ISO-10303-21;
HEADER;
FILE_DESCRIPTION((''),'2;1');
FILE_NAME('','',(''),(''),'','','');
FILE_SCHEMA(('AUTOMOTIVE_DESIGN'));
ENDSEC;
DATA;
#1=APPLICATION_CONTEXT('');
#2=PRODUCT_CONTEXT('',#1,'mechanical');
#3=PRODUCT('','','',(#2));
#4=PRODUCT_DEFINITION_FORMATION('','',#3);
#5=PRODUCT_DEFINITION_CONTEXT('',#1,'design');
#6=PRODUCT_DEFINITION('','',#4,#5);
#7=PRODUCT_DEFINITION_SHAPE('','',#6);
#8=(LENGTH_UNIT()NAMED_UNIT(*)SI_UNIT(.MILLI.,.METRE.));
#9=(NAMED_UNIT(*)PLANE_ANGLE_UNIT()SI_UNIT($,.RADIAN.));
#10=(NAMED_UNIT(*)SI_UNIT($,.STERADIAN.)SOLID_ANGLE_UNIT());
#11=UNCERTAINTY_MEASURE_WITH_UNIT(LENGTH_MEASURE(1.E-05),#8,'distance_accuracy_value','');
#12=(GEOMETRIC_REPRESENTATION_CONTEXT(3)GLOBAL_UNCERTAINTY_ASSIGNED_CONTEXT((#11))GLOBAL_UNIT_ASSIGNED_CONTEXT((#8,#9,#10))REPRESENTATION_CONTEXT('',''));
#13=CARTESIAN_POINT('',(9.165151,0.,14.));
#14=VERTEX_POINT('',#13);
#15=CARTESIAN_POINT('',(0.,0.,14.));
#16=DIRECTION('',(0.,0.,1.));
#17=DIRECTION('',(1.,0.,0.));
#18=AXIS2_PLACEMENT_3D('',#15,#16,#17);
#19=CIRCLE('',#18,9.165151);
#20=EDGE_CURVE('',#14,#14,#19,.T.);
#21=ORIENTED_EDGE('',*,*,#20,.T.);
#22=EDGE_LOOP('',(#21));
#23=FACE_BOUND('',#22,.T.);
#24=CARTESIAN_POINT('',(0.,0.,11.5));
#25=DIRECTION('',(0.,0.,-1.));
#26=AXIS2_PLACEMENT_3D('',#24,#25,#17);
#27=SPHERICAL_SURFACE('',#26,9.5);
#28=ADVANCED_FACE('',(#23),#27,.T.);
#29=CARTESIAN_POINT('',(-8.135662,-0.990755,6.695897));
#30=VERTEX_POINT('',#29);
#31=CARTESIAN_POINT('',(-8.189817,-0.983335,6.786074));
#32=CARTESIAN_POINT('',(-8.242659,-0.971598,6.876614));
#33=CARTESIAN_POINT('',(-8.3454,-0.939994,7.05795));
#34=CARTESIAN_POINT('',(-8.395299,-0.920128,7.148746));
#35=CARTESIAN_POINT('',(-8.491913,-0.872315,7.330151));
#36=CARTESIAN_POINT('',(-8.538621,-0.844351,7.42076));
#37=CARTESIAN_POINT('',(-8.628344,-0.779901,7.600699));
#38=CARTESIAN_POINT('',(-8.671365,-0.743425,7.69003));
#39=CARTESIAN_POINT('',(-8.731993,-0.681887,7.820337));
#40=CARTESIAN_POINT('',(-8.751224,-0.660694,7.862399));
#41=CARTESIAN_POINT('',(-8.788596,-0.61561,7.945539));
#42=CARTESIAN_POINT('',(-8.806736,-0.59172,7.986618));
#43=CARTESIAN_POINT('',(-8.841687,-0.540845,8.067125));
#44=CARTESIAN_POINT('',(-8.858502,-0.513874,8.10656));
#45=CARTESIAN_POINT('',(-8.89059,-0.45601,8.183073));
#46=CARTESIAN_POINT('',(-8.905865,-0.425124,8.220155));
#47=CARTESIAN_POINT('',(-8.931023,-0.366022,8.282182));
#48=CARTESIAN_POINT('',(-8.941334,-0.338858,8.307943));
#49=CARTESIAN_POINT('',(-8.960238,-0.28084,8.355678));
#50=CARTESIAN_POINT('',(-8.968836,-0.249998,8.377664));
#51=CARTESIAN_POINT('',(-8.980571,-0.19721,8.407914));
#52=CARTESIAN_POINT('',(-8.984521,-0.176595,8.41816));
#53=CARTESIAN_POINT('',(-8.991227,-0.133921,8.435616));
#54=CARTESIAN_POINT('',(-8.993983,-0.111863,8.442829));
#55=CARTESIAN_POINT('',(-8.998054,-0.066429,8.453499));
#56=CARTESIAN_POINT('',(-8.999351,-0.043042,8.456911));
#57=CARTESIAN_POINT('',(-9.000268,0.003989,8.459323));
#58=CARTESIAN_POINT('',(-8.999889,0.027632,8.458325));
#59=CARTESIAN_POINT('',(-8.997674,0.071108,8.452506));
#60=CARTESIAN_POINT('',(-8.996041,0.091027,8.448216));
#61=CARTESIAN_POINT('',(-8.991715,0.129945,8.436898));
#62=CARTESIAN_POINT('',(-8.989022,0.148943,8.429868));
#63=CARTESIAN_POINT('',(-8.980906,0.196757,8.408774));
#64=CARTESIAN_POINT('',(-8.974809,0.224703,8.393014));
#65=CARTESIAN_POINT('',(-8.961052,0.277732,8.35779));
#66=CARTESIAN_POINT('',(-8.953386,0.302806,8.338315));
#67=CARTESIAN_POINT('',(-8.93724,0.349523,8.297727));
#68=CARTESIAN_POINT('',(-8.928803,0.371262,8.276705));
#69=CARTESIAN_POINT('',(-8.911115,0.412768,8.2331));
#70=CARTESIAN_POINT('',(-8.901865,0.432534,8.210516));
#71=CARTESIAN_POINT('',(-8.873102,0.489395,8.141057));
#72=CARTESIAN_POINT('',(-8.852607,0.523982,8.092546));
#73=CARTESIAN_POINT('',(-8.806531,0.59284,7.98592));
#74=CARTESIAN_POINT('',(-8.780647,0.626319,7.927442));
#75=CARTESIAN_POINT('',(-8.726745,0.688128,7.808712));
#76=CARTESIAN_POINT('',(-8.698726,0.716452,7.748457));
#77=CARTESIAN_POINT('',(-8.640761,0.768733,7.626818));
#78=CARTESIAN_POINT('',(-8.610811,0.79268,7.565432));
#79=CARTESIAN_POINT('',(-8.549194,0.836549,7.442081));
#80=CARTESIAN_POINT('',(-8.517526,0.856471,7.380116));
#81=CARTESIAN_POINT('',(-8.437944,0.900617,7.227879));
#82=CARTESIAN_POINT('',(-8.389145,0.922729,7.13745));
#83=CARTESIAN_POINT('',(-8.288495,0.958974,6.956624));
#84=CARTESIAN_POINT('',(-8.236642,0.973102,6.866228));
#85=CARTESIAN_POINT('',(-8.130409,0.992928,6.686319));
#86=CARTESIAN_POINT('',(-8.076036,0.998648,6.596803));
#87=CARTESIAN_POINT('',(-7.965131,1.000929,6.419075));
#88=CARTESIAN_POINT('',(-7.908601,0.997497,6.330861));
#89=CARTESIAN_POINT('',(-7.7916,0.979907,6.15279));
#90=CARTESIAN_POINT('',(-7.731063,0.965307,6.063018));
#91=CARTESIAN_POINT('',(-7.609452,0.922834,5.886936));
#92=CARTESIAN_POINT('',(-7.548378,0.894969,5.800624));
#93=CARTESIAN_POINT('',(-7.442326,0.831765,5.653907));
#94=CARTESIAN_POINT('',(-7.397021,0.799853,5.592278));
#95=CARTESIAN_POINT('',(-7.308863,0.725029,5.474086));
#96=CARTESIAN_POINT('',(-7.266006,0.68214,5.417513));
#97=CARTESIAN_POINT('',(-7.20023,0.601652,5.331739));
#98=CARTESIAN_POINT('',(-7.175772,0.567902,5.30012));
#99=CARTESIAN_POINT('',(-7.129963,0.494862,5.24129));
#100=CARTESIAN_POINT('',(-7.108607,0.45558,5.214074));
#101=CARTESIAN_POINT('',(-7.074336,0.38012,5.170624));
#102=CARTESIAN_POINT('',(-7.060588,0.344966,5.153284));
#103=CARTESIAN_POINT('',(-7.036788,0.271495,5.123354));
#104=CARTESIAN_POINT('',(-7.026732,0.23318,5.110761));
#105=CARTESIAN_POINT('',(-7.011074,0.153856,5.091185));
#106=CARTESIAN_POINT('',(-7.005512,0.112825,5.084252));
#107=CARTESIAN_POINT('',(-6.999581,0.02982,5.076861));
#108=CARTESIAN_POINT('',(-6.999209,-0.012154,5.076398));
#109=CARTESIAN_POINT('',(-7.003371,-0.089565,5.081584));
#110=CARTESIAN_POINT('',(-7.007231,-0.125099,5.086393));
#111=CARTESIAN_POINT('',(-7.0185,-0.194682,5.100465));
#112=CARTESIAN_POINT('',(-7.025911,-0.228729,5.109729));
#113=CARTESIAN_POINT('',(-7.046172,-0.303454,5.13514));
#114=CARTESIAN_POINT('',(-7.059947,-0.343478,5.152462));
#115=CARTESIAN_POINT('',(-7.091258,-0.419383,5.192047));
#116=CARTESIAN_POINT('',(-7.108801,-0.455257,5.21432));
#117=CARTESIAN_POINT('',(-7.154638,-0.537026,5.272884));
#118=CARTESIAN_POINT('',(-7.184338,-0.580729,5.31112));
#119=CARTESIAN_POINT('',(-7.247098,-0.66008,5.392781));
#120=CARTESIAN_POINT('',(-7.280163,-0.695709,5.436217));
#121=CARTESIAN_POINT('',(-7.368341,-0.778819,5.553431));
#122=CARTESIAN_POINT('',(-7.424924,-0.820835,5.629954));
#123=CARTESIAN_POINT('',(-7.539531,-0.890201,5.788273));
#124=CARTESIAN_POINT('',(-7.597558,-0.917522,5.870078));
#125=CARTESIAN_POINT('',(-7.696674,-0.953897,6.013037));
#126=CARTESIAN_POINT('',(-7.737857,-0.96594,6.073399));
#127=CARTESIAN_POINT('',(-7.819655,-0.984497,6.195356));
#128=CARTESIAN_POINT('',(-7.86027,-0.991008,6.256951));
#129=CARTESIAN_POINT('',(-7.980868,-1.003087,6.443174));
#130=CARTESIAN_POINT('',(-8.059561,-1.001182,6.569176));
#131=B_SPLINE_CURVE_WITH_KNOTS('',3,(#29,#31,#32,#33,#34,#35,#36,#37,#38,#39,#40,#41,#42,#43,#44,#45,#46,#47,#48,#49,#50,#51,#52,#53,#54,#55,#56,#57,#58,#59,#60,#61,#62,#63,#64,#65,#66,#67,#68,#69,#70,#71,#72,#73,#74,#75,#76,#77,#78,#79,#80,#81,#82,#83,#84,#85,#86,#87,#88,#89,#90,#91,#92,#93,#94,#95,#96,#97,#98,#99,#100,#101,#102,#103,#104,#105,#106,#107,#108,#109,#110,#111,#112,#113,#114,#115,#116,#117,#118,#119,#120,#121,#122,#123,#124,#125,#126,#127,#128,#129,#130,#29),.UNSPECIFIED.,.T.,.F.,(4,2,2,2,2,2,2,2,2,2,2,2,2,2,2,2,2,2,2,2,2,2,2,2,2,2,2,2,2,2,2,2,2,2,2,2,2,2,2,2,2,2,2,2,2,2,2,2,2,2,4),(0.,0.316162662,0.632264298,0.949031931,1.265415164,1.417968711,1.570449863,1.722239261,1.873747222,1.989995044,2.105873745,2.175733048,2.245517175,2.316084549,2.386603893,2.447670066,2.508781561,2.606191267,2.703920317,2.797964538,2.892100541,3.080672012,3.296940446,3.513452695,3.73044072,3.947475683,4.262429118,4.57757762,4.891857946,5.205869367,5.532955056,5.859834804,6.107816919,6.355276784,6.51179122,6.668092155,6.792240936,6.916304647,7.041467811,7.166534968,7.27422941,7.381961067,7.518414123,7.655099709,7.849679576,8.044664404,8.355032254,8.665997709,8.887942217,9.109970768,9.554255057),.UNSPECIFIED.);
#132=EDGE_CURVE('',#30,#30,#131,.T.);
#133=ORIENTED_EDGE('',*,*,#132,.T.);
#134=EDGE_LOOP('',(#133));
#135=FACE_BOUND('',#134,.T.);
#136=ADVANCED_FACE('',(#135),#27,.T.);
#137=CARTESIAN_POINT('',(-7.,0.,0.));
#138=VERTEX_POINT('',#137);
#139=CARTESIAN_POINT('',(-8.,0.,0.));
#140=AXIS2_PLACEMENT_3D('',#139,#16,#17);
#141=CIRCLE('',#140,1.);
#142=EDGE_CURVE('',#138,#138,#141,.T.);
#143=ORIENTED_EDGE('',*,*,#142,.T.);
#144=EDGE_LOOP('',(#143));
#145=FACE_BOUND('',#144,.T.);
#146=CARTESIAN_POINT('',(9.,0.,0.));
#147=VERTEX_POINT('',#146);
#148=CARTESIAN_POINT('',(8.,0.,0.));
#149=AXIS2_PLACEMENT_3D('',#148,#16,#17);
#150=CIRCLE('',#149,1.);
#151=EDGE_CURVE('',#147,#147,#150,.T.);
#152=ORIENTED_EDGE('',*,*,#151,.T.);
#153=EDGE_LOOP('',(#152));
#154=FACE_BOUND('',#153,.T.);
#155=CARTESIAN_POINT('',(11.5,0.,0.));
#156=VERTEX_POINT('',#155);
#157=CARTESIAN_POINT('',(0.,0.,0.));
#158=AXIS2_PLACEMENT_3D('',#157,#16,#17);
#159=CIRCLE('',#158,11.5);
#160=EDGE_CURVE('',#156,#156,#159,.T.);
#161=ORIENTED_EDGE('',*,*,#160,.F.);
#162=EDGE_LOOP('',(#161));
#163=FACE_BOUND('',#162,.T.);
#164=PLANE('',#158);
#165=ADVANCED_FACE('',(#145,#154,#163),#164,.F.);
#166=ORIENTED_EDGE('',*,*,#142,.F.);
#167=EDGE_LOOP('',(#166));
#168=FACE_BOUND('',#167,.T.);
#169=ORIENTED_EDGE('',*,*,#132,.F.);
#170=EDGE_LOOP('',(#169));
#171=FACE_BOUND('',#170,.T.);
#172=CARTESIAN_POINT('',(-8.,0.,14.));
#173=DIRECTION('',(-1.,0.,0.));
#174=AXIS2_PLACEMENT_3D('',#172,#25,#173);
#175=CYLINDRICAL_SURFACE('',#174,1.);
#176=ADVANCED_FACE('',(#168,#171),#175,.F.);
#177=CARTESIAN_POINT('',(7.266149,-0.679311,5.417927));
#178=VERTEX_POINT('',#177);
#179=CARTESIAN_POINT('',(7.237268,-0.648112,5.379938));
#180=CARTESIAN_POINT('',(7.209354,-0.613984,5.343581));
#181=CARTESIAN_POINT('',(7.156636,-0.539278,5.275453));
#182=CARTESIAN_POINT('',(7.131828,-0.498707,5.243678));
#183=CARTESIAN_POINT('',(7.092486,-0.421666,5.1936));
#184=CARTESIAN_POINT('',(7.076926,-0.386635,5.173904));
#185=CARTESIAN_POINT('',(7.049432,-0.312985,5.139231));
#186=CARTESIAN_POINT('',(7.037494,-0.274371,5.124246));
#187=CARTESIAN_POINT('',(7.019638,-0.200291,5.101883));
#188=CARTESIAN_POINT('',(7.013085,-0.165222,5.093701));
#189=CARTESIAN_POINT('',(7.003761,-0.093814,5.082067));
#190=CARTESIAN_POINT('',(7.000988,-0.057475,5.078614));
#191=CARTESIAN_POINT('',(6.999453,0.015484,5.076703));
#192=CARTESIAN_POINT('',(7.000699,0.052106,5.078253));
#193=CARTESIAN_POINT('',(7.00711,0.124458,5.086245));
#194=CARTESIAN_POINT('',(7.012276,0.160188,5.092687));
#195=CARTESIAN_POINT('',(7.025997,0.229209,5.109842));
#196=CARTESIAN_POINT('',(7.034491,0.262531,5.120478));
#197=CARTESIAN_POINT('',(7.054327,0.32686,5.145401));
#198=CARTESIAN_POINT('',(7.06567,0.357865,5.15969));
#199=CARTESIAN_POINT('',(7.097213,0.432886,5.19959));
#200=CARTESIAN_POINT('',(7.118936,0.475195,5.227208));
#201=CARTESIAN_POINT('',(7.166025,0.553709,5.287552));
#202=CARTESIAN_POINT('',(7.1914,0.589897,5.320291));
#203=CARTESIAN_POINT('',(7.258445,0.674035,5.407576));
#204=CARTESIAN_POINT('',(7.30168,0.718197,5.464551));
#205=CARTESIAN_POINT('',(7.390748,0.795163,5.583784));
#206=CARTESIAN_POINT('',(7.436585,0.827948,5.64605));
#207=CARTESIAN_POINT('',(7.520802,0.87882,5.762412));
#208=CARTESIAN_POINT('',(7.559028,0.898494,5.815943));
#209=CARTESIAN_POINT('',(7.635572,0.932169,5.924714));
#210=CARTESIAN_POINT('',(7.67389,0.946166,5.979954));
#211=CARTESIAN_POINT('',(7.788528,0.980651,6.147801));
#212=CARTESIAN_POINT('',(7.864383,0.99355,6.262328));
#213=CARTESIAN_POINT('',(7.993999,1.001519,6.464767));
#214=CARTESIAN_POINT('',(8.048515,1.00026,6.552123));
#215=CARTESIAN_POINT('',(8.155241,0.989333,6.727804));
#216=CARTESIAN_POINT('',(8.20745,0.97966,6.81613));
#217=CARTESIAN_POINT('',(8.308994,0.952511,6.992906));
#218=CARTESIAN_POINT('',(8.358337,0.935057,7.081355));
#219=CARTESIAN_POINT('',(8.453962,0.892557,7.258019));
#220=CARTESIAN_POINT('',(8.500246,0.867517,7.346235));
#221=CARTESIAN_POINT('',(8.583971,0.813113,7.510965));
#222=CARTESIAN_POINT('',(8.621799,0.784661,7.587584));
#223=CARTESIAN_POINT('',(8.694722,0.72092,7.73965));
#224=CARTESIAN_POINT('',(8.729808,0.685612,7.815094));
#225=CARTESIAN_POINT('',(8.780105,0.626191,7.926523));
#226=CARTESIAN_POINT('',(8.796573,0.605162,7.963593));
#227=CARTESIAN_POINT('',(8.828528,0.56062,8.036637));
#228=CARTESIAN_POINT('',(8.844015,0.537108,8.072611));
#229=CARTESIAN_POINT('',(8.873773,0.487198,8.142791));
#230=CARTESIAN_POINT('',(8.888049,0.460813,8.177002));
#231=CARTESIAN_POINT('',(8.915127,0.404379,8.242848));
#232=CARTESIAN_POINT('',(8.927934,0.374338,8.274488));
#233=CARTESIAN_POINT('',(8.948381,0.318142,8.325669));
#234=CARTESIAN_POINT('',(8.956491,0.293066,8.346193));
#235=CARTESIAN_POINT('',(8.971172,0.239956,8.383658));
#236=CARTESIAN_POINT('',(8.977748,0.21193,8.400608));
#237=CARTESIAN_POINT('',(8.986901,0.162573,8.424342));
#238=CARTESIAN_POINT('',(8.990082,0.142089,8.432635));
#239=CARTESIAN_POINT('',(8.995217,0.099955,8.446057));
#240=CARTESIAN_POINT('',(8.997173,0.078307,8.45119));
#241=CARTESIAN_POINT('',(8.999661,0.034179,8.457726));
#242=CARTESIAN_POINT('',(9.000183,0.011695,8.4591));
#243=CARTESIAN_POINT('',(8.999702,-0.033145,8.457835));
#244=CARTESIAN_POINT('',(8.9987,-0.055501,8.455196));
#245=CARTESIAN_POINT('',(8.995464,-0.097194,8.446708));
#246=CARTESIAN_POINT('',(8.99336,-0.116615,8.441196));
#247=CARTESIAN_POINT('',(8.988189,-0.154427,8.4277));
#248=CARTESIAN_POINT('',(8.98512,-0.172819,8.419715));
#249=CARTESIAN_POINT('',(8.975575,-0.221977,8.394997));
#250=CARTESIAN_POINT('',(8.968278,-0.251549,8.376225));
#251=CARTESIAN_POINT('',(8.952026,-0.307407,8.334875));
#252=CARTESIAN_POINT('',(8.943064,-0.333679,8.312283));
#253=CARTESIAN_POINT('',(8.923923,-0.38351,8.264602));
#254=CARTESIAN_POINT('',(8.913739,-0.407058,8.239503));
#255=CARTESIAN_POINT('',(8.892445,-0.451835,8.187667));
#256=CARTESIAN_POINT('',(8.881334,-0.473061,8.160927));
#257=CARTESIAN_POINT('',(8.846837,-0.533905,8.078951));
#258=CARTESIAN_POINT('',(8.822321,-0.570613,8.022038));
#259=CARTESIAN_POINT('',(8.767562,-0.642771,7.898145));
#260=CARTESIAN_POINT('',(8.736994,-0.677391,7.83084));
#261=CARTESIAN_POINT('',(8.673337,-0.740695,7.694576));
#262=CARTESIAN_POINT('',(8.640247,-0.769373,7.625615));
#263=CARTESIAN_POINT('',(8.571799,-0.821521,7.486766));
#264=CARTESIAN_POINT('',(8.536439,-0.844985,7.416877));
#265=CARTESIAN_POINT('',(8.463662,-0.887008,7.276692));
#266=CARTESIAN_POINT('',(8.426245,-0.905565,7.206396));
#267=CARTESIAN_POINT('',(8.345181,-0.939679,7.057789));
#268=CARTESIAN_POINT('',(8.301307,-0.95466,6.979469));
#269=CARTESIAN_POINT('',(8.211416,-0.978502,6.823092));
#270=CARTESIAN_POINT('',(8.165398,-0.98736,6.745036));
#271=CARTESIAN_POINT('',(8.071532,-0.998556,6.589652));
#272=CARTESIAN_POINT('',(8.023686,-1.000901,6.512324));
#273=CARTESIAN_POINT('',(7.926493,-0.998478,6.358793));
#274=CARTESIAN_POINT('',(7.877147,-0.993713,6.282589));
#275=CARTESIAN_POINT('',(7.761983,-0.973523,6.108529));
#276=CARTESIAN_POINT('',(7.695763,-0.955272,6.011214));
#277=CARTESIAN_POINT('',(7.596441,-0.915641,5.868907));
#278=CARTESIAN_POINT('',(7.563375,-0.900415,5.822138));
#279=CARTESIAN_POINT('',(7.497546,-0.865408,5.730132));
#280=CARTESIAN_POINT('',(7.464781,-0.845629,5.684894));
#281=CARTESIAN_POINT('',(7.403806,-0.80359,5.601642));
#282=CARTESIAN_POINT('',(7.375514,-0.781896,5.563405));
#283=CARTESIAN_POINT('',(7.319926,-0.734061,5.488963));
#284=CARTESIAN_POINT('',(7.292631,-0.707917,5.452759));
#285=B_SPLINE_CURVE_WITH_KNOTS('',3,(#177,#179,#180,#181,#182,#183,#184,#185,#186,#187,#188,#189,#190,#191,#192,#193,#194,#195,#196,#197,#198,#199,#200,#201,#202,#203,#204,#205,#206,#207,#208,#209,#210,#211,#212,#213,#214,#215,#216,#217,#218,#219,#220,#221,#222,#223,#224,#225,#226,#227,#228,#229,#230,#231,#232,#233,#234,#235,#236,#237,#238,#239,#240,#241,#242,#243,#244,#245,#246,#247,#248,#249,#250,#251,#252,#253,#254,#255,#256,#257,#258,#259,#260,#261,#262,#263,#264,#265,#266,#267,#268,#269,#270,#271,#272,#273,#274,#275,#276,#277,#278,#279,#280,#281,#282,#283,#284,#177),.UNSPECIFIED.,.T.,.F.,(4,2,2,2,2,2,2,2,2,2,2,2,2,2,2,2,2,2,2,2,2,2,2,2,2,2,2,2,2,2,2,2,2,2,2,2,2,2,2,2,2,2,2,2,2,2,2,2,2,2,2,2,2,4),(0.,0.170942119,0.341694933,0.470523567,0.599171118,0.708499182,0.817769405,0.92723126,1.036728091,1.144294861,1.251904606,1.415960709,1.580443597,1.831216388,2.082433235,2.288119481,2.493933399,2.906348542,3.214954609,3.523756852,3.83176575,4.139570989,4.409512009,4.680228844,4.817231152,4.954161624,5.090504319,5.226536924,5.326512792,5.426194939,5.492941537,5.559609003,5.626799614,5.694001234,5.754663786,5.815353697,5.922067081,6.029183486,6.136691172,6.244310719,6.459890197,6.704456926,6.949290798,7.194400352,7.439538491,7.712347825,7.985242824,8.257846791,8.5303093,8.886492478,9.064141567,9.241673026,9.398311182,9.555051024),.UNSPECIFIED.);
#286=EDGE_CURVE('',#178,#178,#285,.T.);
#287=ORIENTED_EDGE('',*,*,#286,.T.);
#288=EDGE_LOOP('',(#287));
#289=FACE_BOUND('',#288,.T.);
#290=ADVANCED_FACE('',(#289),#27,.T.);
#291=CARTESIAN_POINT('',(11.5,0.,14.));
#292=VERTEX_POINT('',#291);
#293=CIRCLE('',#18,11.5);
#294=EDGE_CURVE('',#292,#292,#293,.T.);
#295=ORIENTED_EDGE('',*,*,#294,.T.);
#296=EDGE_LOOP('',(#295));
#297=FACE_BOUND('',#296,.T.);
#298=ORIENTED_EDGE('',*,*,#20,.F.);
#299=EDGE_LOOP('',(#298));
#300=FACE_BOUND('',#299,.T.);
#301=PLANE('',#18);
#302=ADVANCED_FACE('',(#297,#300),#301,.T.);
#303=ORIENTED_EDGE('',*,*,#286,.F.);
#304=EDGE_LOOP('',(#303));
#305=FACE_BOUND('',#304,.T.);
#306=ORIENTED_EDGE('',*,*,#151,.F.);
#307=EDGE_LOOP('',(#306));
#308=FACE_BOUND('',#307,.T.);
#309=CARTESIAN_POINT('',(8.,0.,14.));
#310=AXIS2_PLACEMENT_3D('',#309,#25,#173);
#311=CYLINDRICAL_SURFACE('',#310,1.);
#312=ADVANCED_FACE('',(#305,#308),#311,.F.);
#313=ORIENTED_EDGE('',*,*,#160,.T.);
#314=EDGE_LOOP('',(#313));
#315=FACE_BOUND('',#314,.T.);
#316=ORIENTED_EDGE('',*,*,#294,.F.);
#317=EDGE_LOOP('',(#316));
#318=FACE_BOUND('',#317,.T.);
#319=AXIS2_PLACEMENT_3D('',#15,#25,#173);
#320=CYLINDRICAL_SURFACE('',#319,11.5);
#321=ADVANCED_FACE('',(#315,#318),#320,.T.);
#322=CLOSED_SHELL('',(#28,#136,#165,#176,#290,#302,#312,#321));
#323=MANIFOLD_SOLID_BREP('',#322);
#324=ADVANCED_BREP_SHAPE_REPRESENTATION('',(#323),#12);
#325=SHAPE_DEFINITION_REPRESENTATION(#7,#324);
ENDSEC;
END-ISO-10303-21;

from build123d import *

# Parameters (mm, degrees)
SKIZZE1_R   = 11.5
SKIZZE1_R_2 = 1
BODY_DEPTH  = 14


with BuildPart() as part:
    # Skizze1 → Body (new body)
    with BuildSketch(Plane.XY):
        Circle(SKIZZE1_R)
        with Locations((-8, 0)):
            Circle(SKIZZE1_R_2, mode=Mode.SUBTRACT)
        with Locations((8, 0)):
            Circle(SKIZZE1_R_2, mode=Mode.SUBTRACT)
    extrude(amount=BODY_DEPTH)

    # Skizze2 → Rotation1 (revolve)
    with BuildSketch(Plane(origin=(0, 0, 0), x_dir=(1, 0, 0), z_dir=(0, 1, 0))):
        with BuildLine():
            ThreePointArc((0, -2), (-9.5, -11.5), (0, -21))
            Line((0, -21), (0, -2))
        make_face()
    revolve(axis=Axis((0, 0, 0), (0, 0, 1)))


solid = part.part
